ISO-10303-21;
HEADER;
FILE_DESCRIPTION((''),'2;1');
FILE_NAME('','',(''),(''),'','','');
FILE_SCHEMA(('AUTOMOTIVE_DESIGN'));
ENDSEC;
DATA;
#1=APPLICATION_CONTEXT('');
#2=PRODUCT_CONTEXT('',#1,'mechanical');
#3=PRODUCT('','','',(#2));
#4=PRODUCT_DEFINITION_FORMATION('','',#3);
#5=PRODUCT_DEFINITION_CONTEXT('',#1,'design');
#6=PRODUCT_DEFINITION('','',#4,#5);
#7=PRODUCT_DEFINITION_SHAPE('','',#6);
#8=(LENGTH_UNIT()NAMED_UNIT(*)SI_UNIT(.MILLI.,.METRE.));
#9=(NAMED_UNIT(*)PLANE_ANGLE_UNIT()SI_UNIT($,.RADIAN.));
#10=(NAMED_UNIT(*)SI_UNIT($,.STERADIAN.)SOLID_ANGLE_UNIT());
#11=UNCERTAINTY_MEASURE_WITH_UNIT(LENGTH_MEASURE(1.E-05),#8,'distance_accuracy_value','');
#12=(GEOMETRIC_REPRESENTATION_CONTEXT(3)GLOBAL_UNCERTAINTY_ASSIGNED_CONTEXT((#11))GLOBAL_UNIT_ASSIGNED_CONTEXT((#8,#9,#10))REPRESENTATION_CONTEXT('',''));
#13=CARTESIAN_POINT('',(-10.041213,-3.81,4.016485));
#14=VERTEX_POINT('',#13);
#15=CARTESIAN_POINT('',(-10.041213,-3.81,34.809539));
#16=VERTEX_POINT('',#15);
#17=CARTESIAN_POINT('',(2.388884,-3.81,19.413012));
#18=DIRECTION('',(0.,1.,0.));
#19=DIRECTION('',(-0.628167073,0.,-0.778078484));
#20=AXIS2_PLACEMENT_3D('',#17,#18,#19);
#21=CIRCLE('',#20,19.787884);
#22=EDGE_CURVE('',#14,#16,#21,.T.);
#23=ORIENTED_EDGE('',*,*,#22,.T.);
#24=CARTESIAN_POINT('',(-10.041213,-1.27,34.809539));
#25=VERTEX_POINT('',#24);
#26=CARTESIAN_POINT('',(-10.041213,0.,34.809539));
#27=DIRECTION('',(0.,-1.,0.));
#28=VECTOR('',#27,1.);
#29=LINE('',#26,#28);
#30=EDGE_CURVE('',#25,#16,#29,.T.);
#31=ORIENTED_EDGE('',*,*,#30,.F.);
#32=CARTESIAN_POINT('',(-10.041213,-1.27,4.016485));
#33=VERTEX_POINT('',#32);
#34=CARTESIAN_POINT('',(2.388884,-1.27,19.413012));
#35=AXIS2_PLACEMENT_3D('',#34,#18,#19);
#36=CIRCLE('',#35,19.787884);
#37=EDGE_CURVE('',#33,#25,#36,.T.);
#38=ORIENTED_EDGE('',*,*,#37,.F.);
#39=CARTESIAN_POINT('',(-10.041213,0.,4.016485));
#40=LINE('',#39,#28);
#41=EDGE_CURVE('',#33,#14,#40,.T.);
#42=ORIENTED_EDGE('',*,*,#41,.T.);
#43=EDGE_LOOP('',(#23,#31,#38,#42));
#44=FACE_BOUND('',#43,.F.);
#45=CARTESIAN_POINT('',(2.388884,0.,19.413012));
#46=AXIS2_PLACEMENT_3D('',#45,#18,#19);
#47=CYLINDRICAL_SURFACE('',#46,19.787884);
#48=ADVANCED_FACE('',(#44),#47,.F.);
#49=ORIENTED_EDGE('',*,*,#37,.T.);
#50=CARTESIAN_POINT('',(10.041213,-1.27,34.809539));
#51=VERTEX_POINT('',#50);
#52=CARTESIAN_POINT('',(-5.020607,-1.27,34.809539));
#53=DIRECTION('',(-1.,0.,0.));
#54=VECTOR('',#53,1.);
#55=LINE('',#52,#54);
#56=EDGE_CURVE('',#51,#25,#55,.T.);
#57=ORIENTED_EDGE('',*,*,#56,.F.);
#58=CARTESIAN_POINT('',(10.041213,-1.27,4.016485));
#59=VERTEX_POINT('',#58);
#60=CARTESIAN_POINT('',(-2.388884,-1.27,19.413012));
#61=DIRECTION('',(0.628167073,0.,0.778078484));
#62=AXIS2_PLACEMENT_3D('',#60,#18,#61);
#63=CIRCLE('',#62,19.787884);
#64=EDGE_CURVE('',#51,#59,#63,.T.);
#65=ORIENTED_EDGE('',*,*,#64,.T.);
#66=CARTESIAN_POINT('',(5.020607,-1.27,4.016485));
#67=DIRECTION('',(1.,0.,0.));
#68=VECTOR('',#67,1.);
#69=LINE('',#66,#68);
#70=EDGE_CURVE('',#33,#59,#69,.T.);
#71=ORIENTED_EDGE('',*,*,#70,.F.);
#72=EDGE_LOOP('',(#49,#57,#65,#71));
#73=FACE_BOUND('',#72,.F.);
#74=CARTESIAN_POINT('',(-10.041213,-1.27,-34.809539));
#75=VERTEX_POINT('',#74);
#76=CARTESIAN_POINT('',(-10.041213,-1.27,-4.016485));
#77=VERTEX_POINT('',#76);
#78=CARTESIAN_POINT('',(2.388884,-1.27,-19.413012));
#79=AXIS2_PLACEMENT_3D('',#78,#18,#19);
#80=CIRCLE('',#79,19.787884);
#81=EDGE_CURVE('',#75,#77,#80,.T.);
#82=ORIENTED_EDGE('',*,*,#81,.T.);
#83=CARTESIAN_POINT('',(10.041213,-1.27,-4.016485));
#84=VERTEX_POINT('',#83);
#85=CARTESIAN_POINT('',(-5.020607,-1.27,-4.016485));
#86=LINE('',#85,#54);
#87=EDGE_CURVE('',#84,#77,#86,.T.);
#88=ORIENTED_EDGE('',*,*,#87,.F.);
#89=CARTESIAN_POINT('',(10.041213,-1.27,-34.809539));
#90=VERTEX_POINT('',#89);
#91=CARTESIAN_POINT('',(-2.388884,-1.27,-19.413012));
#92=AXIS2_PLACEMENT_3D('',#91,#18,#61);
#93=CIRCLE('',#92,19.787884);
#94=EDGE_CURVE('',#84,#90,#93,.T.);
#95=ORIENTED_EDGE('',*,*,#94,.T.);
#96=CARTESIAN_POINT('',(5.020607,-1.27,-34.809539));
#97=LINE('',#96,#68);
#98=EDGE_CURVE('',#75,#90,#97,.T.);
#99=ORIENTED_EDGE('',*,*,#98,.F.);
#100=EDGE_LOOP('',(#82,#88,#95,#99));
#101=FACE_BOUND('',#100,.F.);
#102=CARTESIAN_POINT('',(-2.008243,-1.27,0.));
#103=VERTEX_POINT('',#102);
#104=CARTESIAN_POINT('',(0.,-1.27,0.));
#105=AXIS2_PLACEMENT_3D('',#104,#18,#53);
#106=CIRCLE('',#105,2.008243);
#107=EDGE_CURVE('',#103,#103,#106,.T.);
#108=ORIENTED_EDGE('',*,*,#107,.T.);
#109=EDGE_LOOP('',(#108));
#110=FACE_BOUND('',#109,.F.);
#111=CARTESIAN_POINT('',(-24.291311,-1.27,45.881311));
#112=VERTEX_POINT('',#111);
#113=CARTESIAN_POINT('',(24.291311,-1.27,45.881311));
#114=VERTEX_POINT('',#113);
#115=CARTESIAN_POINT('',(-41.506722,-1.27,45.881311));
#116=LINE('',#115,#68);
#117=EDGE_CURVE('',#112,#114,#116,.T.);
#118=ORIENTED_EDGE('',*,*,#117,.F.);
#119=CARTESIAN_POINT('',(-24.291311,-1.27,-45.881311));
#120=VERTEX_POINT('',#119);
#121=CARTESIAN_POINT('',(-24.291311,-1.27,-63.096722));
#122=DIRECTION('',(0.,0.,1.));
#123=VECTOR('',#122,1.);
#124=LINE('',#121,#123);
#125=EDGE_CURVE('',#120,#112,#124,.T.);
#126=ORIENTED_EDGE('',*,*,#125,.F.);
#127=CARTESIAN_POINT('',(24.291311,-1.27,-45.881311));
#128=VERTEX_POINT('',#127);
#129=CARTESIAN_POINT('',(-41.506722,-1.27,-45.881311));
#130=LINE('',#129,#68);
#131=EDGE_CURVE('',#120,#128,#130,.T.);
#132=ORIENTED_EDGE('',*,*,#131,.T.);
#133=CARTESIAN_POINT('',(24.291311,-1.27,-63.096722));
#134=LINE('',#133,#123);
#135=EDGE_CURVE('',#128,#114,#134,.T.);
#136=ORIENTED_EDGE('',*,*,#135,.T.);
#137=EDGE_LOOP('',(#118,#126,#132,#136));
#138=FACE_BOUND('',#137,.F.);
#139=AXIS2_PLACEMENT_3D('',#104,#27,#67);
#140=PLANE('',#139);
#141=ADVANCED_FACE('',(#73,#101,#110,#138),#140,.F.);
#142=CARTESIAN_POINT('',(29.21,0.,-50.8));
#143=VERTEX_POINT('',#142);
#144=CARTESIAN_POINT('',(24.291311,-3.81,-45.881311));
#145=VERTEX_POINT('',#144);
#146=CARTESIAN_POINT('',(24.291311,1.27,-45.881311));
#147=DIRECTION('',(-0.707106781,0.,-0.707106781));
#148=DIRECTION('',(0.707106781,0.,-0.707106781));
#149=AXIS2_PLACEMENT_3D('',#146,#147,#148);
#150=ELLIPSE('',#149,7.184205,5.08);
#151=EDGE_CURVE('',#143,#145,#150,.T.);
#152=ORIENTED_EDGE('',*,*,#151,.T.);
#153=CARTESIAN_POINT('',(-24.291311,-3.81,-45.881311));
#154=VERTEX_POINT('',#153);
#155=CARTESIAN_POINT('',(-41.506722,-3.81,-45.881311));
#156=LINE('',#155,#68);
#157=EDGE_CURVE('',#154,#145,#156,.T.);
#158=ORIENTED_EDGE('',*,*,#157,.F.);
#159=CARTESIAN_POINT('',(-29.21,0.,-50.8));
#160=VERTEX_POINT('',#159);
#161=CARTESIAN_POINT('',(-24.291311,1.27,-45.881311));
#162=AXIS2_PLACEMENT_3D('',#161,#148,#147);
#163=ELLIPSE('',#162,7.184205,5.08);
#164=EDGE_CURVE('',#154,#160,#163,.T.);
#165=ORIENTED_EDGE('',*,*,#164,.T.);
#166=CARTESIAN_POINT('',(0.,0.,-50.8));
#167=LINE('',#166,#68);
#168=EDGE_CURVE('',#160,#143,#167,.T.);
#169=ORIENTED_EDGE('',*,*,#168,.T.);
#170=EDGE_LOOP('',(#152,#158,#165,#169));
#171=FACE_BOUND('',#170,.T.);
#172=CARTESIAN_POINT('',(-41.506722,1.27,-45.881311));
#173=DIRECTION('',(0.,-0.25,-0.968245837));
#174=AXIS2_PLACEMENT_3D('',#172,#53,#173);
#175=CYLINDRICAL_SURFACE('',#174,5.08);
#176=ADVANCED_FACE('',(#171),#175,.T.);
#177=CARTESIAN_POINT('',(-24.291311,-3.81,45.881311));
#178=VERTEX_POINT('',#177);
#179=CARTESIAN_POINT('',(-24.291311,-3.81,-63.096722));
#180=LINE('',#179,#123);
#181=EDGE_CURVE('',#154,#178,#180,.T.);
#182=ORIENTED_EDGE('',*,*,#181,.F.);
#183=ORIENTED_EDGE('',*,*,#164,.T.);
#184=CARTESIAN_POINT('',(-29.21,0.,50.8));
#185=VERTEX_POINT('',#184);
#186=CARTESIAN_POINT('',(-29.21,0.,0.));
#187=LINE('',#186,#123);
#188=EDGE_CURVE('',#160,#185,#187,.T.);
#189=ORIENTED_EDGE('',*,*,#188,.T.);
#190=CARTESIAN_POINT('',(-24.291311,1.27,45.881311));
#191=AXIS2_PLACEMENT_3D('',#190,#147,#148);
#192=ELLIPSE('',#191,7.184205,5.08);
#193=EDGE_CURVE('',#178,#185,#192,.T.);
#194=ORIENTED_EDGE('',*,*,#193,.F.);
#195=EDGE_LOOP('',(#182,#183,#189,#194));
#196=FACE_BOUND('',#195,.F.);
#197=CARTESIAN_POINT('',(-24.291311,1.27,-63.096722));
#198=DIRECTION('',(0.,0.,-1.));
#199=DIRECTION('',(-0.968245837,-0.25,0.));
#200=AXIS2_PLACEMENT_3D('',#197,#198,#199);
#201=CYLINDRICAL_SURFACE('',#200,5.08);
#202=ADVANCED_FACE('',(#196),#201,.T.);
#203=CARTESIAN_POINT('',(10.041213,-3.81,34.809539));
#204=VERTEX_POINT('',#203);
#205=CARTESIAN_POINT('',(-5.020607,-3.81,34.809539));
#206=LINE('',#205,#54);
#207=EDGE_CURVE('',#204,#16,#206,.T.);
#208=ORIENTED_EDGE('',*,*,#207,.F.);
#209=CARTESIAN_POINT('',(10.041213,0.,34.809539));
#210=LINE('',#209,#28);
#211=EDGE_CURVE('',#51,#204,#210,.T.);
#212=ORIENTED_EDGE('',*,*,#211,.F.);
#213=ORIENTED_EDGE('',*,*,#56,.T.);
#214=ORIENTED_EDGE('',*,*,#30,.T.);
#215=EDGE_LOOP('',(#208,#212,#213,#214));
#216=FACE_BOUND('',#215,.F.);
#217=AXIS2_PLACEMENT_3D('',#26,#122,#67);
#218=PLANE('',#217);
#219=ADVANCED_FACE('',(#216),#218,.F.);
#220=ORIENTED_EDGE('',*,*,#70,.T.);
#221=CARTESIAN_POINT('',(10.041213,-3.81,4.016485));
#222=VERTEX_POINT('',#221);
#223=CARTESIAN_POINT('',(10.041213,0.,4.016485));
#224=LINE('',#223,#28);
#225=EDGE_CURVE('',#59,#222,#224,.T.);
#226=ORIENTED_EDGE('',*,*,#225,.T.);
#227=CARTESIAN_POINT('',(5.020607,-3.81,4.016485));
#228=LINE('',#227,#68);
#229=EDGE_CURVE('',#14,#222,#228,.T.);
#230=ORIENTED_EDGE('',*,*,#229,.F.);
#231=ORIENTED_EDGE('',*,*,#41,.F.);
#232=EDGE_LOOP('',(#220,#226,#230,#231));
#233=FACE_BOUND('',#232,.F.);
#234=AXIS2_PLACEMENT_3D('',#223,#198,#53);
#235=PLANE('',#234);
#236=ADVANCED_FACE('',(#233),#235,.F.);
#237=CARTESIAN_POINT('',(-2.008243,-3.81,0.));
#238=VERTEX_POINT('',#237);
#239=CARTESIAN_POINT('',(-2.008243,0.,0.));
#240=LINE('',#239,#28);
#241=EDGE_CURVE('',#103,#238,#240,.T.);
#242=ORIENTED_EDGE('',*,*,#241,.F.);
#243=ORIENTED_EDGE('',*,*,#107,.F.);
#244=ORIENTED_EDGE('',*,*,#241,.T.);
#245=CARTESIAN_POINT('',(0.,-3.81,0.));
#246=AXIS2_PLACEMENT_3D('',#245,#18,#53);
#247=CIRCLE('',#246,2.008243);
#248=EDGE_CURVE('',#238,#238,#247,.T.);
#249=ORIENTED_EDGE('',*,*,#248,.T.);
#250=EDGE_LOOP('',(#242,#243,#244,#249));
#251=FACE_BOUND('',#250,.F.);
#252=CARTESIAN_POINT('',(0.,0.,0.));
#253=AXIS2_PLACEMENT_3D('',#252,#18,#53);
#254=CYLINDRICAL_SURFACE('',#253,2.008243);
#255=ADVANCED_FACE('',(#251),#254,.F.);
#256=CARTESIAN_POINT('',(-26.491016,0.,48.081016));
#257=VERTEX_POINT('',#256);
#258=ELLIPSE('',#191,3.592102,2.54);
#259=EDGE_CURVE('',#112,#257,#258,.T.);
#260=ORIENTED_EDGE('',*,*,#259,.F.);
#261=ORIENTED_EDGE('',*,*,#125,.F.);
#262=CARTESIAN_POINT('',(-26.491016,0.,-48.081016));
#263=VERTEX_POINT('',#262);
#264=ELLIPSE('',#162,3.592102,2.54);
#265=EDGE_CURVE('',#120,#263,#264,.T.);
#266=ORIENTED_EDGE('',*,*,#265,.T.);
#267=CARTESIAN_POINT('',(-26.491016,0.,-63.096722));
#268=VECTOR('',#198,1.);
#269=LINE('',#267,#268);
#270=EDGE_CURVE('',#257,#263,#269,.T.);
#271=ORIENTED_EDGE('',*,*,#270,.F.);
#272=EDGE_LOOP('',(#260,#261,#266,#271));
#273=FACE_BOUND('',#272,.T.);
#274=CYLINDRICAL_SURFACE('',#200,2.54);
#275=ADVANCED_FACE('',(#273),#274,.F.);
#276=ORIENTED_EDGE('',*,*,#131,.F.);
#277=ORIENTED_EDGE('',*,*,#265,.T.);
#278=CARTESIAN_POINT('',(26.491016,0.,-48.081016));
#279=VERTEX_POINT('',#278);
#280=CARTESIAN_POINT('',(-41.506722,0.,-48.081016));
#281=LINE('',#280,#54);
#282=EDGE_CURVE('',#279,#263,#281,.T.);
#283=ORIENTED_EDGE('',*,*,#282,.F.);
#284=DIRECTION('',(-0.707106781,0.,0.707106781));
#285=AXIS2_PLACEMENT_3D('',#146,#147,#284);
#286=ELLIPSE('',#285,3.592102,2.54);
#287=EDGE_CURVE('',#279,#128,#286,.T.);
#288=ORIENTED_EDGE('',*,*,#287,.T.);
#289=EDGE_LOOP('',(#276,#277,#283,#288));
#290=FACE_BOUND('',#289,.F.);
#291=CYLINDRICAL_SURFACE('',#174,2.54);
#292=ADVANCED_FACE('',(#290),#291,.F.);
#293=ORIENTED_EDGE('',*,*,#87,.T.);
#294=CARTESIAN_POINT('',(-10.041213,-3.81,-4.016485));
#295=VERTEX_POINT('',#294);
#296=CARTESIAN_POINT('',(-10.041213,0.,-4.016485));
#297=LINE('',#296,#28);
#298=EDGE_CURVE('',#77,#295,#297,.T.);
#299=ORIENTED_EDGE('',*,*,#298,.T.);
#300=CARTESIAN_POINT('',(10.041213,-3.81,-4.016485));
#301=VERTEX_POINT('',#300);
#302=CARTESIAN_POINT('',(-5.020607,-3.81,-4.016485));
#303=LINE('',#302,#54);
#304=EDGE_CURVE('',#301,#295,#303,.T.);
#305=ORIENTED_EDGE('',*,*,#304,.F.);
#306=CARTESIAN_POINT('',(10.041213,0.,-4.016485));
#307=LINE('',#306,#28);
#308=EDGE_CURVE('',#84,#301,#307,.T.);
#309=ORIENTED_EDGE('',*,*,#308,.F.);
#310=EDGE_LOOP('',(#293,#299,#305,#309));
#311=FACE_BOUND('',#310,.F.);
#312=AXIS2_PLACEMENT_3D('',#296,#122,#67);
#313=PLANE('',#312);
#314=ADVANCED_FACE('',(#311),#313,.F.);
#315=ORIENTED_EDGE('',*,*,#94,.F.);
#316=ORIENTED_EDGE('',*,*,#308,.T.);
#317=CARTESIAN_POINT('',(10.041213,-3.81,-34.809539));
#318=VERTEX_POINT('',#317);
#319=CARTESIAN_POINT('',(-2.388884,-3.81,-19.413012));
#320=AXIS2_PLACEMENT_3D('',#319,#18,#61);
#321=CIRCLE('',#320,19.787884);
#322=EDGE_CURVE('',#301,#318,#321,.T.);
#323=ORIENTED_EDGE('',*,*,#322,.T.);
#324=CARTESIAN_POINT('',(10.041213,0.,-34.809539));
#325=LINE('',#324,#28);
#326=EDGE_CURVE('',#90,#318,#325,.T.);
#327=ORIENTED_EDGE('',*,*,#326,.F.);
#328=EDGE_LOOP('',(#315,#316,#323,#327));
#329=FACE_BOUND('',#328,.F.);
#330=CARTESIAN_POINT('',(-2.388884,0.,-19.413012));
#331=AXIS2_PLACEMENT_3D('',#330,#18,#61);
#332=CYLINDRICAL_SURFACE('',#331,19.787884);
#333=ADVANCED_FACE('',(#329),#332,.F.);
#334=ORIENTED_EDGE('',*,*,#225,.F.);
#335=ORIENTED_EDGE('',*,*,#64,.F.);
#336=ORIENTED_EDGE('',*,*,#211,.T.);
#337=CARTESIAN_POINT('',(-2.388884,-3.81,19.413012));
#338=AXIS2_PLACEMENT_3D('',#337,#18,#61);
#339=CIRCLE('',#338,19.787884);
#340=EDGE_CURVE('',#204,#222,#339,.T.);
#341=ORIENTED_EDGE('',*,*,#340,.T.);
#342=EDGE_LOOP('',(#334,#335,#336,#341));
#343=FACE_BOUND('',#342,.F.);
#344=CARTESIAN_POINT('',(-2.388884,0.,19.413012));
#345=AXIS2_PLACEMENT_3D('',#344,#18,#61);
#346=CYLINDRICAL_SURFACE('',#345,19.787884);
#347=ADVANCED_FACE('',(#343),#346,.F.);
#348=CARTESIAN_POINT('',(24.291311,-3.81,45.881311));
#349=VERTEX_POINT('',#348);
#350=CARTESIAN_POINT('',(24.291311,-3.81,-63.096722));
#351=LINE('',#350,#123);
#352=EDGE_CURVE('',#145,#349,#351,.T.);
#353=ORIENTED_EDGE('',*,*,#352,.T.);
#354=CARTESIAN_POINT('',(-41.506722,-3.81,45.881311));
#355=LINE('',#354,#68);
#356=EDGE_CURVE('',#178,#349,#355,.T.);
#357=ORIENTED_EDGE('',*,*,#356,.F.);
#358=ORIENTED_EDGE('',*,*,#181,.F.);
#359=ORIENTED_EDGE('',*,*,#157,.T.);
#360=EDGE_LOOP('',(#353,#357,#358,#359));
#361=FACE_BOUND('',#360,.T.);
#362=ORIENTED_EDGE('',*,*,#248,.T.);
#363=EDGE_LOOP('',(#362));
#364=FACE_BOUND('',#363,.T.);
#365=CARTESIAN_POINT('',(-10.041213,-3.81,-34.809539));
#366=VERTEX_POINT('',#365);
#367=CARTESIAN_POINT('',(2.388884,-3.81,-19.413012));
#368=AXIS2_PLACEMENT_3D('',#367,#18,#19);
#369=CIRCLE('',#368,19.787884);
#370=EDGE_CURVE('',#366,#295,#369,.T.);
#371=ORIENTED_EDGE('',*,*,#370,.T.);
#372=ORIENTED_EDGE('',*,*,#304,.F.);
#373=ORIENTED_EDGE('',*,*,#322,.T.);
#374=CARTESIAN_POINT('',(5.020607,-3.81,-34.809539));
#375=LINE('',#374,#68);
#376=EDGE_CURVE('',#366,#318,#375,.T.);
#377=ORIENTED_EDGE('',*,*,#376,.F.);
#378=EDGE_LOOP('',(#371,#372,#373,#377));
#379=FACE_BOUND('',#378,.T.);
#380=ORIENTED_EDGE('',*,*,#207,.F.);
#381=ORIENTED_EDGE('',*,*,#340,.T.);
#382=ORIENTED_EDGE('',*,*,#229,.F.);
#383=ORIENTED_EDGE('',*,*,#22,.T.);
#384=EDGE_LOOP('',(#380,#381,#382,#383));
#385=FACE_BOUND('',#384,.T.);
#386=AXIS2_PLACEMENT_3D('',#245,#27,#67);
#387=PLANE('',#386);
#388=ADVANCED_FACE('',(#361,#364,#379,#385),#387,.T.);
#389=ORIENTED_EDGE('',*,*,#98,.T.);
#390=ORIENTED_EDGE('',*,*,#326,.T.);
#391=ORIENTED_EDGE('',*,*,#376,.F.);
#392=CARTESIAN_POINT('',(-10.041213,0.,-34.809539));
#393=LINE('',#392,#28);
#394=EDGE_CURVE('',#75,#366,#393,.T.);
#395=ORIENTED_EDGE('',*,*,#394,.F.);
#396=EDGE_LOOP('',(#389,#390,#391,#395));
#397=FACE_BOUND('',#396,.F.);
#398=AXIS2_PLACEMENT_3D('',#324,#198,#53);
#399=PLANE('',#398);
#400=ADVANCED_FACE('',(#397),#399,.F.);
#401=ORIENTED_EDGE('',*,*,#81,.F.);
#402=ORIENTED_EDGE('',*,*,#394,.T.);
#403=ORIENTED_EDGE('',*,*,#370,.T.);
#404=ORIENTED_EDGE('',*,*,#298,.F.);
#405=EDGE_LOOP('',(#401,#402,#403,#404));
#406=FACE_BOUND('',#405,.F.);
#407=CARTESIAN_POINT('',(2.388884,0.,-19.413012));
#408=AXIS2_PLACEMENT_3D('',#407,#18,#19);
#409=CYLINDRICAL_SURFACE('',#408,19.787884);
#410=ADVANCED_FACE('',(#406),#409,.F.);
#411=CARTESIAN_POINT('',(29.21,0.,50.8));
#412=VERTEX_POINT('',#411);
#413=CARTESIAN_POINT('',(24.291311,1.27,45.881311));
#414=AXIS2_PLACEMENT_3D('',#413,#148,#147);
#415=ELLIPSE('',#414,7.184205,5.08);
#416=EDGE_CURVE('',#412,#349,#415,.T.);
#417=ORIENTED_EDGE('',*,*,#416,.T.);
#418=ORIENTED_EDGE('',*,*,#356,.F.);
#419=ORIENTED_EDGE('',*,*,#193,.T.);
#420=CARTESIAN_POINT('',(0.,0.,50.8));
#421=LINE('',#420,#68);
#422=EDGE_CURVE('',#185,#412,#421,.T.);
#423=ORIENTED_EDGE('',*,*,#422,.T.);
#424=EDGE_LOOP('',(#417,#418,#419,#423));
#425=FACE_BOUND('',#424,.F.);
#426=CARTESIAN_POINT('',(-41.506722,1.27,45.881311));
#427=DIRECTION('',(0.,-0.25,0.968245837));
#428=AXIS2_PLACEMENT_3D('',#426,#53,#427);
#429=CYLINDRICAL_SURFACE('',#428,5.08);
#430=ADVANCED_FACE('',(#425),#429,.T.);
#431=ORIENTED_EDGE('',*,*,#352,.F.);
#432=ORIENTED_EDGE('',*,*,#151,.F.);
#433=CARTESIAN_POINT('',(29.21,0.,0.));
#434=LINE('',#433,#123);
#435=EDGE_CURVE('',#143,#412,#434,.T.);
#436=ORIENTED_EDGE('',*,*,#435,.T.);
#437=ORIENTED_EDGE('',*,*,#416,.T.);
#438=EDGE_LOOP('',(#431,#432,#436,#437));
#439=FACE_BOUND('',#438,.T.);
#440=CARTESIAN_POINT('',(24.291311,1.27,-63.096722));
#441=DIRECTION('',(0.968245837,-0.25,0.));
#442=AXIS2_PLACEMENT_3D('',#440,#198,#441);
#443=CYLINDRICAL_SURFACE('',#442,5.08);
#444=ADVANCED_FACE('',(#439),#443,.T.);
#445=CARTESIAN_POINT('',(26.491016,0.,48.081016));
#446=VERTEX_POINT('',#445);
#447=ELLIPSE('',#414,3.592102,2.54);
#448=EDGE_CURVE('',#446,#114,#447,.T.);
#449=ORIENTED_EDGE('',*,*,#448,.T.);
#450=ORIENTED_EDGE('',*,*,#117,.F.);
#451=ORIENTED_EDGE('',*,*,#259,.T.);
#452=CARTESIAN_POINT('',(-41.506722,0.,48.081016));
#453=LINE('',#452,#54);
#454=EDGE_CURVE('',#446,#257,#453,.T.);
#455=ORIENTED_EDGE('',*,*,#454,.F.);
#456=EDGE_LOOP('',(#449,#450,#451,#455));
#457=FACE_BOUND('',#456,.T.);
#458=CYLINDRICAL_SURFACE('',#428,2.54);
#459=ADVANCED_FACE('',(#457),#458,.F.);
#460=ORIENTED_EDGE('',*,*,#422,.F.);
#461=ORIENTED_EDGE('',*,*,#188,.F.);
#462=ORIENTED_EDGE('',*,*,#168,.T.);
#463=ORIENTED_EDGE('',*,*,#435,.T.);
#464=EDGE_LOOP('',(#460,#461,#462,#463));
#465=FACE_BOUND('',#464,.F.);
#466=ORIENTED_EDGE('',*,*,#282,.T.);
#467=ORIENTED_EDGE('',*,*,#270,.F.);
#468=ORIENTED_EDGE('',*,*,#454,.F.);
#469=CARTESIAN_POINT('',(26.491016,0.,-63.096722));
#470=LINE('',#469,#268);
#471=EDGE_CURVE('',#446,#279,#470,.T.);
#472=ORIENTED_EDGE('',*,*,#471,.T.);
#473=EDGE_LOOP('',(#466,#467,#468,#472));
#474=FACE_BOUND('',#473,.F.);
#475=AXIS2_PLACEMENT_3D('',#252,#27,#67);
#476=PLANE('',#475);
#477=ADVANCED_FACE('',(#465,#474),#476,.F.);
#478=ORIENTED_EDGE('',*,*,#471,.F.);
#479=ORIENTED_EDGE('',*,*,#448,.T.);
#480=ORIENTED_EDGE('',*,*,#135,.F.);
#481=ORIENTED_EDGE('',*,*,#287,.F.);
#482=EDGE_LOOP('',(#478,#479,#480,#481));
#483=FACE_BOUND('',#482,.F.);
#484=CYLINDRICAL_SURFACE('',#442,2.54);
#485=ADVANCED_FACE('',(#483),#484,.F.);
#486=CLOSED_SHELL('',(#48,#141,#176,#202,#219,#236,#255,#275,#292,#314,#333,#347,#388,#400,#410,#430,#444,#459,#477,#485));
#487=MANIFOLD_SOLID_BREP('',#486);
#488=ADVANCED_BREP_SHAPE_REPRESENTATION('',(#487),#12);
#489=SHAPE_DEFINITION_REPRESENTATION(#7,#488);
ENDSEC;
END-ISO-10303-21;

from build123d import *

# Parameters (mm, degrees)
F0_W        = 58.42
F0_H        = 101.6
F1_DEPTH    = 3.81
F2_T1_DEPTH = 126.1934442484
F2_T3_DEPTH = 83.0134442484
F4_T        = -2.54
F3_R        = 2.0082426315
F5_DEPTH    = 25.4


# Not quite as in the source:
# - a fillet or chamfer that OpenCascade refuses, or shapes differently, is made with other operations: its cross-section is extruded or revolved along the edge and cut away or added


with BuildPart() as f1:
    # F0 (on Front) → F1 (new body)
    with BuildSketch(Plane.XZ):
        Rectangle(F0_W, F0_H)
    extrude(amount=F1_DEPTH)

    # F2: fillet of radius 5.08 on 4 edges, made by hand

    # F2_s2 → F2_t1 (cut)
    with BuildSketch(Plane.XY.offset(-63.0967221242)):
        with BuildLine():
            ThreePointArc((-29.21, 0), (-27.4021631237, -2.7460926284), (-24.2913111503, -3.81))
            Line((-24.2913111503, -3.81), (-24.2913111503, -3.9116))
            Line((-24.2913111503, -3.9116), (-29.21, -3.9116))
            Line((-29.21, -3.9116), (-29.3116, -3.81))
            ThreePointArc((-29.3116, -3.81), (-29.3116, -1.905), (-29.308373777, -0.0254))
            Line((-29.308373777, -0.0254), (-29.21, 0))
        make_face()
        with BuildLine():
            ThreePointArc((29.21, 0), (27.4021631237, -2.7460926284), (24.2913111503, -3.81))
            Line((24.2913111503, -3.81), (24.2913111503, -3.9116))
            Line((24.2913111503, -3.9116), (29.21, -3.9116))
            Line((29.21, -3.9116), (29.3116, -3.81))
            ThreePointArc((29.3116, -3.81), (29.3116, -1.905), (29.308373777, -0.0254))
            Line((29.308373777, -0.0254), (29.21, 0))
        make_face()
    extrude(amount=F2_T1_DEPTH, mode=Mode.SUBTRACT)

    # F2_s4 → F2_t3 (cut)
    with BuildSketch(Plane.YZ.offset(-41.5067221242)):
        with BuildLine():
            ThreePointArc((0, 50.8), (-2.7460926284, 48.9921631237), (-3.81, 45.8813111503))
            Line((-3.81, 45.8813111503), (-3.9116, 45.8813111503))
            Line((-3.9116, 45.8813111503), (-3.9116, 50.8))
            Line((-3.9116, 50.8), (-3.81, 50.9016))
            ThreePointArc((-3.81, 50.9016), (-1.905, 50.9016), (-0.0254, 50.898373777))
            Line((-0.0254, 50.898373777), (0, 50.8))
        make_face()
        with BuildLine():
            ThreePointArc((0, -50.8), (-2.7460926284, -48.9921631237), (-3.81, -45.8813111503))
            Line((-3.81, -45.8813111503), (-3.9116, -45.8813111503))
            Line((-3.9116, -45.8813111503), (-3.9116, -50.8))
            Line((-3.9116, -50.8), (-3.81, -50.9016))
            ThreePointArc((-3.81, -50.9016), (-1.905, -50.9016), (-0.0254, -50.898373777))
            Line((-0.0254, -50.898373777), (0, -50.8))
        make_face()
    extrude(amount=F2_T3_DEPTH, mode=Mode.SUBTRACT)

    # F4
    f4_openings = [f1.faces().sort_by_distance(p)[0] for p in [
        (0, 0, 0),
    ]]
    offset(amount=F4_T, openings=f4_openings)

    # F3 (on face) → F5 (cut)
    with BuildSketch(Plane(origin=(0, 0, 0), x_dir=(-1, 0, 0), z_dir=(0, 1, 0))):
        with BuildLine():
            Line((10.0412131573, 34.8095389452), (-10.0412131573, 34.8095389452))
            ThreePointArc((-10.0412131573, 34.8095389452), (-17.399, 19.413012104), (-10.0412131573, 4.0164852629))
            Line((-10.0412131573, 4.0164852629), (10.0412131573, 4.0164852629))
            ThreePointArc((10.0412131573, 4.0164852629), (17.399, 19.413012104), (10.0412131573, 34.8095389452))
        make_face()
        with BuildLine():
            Line((10.0412131573, -4.0164852629), (-10.0412131573, -4.0164852629))
            ThreePointArc((-10.0412131573, -4.0164852629), (-17.399, -19.413012104), (-10.0412131573, -34.8095389452))
            Line((-10.0412131573, -34.8095389452), (10.0412131573, -34.8095389452))
            ThreePointArc((10.0412131573, -34.8095389452), (17.399, -19.413012104), (10.0412131573, -4.0164852629))
        make_face()
        Circle(F3_R)
    extrude(amount=-F5_DEPTH, mode=Mode.SUBTRACT)


solid = f1.part
